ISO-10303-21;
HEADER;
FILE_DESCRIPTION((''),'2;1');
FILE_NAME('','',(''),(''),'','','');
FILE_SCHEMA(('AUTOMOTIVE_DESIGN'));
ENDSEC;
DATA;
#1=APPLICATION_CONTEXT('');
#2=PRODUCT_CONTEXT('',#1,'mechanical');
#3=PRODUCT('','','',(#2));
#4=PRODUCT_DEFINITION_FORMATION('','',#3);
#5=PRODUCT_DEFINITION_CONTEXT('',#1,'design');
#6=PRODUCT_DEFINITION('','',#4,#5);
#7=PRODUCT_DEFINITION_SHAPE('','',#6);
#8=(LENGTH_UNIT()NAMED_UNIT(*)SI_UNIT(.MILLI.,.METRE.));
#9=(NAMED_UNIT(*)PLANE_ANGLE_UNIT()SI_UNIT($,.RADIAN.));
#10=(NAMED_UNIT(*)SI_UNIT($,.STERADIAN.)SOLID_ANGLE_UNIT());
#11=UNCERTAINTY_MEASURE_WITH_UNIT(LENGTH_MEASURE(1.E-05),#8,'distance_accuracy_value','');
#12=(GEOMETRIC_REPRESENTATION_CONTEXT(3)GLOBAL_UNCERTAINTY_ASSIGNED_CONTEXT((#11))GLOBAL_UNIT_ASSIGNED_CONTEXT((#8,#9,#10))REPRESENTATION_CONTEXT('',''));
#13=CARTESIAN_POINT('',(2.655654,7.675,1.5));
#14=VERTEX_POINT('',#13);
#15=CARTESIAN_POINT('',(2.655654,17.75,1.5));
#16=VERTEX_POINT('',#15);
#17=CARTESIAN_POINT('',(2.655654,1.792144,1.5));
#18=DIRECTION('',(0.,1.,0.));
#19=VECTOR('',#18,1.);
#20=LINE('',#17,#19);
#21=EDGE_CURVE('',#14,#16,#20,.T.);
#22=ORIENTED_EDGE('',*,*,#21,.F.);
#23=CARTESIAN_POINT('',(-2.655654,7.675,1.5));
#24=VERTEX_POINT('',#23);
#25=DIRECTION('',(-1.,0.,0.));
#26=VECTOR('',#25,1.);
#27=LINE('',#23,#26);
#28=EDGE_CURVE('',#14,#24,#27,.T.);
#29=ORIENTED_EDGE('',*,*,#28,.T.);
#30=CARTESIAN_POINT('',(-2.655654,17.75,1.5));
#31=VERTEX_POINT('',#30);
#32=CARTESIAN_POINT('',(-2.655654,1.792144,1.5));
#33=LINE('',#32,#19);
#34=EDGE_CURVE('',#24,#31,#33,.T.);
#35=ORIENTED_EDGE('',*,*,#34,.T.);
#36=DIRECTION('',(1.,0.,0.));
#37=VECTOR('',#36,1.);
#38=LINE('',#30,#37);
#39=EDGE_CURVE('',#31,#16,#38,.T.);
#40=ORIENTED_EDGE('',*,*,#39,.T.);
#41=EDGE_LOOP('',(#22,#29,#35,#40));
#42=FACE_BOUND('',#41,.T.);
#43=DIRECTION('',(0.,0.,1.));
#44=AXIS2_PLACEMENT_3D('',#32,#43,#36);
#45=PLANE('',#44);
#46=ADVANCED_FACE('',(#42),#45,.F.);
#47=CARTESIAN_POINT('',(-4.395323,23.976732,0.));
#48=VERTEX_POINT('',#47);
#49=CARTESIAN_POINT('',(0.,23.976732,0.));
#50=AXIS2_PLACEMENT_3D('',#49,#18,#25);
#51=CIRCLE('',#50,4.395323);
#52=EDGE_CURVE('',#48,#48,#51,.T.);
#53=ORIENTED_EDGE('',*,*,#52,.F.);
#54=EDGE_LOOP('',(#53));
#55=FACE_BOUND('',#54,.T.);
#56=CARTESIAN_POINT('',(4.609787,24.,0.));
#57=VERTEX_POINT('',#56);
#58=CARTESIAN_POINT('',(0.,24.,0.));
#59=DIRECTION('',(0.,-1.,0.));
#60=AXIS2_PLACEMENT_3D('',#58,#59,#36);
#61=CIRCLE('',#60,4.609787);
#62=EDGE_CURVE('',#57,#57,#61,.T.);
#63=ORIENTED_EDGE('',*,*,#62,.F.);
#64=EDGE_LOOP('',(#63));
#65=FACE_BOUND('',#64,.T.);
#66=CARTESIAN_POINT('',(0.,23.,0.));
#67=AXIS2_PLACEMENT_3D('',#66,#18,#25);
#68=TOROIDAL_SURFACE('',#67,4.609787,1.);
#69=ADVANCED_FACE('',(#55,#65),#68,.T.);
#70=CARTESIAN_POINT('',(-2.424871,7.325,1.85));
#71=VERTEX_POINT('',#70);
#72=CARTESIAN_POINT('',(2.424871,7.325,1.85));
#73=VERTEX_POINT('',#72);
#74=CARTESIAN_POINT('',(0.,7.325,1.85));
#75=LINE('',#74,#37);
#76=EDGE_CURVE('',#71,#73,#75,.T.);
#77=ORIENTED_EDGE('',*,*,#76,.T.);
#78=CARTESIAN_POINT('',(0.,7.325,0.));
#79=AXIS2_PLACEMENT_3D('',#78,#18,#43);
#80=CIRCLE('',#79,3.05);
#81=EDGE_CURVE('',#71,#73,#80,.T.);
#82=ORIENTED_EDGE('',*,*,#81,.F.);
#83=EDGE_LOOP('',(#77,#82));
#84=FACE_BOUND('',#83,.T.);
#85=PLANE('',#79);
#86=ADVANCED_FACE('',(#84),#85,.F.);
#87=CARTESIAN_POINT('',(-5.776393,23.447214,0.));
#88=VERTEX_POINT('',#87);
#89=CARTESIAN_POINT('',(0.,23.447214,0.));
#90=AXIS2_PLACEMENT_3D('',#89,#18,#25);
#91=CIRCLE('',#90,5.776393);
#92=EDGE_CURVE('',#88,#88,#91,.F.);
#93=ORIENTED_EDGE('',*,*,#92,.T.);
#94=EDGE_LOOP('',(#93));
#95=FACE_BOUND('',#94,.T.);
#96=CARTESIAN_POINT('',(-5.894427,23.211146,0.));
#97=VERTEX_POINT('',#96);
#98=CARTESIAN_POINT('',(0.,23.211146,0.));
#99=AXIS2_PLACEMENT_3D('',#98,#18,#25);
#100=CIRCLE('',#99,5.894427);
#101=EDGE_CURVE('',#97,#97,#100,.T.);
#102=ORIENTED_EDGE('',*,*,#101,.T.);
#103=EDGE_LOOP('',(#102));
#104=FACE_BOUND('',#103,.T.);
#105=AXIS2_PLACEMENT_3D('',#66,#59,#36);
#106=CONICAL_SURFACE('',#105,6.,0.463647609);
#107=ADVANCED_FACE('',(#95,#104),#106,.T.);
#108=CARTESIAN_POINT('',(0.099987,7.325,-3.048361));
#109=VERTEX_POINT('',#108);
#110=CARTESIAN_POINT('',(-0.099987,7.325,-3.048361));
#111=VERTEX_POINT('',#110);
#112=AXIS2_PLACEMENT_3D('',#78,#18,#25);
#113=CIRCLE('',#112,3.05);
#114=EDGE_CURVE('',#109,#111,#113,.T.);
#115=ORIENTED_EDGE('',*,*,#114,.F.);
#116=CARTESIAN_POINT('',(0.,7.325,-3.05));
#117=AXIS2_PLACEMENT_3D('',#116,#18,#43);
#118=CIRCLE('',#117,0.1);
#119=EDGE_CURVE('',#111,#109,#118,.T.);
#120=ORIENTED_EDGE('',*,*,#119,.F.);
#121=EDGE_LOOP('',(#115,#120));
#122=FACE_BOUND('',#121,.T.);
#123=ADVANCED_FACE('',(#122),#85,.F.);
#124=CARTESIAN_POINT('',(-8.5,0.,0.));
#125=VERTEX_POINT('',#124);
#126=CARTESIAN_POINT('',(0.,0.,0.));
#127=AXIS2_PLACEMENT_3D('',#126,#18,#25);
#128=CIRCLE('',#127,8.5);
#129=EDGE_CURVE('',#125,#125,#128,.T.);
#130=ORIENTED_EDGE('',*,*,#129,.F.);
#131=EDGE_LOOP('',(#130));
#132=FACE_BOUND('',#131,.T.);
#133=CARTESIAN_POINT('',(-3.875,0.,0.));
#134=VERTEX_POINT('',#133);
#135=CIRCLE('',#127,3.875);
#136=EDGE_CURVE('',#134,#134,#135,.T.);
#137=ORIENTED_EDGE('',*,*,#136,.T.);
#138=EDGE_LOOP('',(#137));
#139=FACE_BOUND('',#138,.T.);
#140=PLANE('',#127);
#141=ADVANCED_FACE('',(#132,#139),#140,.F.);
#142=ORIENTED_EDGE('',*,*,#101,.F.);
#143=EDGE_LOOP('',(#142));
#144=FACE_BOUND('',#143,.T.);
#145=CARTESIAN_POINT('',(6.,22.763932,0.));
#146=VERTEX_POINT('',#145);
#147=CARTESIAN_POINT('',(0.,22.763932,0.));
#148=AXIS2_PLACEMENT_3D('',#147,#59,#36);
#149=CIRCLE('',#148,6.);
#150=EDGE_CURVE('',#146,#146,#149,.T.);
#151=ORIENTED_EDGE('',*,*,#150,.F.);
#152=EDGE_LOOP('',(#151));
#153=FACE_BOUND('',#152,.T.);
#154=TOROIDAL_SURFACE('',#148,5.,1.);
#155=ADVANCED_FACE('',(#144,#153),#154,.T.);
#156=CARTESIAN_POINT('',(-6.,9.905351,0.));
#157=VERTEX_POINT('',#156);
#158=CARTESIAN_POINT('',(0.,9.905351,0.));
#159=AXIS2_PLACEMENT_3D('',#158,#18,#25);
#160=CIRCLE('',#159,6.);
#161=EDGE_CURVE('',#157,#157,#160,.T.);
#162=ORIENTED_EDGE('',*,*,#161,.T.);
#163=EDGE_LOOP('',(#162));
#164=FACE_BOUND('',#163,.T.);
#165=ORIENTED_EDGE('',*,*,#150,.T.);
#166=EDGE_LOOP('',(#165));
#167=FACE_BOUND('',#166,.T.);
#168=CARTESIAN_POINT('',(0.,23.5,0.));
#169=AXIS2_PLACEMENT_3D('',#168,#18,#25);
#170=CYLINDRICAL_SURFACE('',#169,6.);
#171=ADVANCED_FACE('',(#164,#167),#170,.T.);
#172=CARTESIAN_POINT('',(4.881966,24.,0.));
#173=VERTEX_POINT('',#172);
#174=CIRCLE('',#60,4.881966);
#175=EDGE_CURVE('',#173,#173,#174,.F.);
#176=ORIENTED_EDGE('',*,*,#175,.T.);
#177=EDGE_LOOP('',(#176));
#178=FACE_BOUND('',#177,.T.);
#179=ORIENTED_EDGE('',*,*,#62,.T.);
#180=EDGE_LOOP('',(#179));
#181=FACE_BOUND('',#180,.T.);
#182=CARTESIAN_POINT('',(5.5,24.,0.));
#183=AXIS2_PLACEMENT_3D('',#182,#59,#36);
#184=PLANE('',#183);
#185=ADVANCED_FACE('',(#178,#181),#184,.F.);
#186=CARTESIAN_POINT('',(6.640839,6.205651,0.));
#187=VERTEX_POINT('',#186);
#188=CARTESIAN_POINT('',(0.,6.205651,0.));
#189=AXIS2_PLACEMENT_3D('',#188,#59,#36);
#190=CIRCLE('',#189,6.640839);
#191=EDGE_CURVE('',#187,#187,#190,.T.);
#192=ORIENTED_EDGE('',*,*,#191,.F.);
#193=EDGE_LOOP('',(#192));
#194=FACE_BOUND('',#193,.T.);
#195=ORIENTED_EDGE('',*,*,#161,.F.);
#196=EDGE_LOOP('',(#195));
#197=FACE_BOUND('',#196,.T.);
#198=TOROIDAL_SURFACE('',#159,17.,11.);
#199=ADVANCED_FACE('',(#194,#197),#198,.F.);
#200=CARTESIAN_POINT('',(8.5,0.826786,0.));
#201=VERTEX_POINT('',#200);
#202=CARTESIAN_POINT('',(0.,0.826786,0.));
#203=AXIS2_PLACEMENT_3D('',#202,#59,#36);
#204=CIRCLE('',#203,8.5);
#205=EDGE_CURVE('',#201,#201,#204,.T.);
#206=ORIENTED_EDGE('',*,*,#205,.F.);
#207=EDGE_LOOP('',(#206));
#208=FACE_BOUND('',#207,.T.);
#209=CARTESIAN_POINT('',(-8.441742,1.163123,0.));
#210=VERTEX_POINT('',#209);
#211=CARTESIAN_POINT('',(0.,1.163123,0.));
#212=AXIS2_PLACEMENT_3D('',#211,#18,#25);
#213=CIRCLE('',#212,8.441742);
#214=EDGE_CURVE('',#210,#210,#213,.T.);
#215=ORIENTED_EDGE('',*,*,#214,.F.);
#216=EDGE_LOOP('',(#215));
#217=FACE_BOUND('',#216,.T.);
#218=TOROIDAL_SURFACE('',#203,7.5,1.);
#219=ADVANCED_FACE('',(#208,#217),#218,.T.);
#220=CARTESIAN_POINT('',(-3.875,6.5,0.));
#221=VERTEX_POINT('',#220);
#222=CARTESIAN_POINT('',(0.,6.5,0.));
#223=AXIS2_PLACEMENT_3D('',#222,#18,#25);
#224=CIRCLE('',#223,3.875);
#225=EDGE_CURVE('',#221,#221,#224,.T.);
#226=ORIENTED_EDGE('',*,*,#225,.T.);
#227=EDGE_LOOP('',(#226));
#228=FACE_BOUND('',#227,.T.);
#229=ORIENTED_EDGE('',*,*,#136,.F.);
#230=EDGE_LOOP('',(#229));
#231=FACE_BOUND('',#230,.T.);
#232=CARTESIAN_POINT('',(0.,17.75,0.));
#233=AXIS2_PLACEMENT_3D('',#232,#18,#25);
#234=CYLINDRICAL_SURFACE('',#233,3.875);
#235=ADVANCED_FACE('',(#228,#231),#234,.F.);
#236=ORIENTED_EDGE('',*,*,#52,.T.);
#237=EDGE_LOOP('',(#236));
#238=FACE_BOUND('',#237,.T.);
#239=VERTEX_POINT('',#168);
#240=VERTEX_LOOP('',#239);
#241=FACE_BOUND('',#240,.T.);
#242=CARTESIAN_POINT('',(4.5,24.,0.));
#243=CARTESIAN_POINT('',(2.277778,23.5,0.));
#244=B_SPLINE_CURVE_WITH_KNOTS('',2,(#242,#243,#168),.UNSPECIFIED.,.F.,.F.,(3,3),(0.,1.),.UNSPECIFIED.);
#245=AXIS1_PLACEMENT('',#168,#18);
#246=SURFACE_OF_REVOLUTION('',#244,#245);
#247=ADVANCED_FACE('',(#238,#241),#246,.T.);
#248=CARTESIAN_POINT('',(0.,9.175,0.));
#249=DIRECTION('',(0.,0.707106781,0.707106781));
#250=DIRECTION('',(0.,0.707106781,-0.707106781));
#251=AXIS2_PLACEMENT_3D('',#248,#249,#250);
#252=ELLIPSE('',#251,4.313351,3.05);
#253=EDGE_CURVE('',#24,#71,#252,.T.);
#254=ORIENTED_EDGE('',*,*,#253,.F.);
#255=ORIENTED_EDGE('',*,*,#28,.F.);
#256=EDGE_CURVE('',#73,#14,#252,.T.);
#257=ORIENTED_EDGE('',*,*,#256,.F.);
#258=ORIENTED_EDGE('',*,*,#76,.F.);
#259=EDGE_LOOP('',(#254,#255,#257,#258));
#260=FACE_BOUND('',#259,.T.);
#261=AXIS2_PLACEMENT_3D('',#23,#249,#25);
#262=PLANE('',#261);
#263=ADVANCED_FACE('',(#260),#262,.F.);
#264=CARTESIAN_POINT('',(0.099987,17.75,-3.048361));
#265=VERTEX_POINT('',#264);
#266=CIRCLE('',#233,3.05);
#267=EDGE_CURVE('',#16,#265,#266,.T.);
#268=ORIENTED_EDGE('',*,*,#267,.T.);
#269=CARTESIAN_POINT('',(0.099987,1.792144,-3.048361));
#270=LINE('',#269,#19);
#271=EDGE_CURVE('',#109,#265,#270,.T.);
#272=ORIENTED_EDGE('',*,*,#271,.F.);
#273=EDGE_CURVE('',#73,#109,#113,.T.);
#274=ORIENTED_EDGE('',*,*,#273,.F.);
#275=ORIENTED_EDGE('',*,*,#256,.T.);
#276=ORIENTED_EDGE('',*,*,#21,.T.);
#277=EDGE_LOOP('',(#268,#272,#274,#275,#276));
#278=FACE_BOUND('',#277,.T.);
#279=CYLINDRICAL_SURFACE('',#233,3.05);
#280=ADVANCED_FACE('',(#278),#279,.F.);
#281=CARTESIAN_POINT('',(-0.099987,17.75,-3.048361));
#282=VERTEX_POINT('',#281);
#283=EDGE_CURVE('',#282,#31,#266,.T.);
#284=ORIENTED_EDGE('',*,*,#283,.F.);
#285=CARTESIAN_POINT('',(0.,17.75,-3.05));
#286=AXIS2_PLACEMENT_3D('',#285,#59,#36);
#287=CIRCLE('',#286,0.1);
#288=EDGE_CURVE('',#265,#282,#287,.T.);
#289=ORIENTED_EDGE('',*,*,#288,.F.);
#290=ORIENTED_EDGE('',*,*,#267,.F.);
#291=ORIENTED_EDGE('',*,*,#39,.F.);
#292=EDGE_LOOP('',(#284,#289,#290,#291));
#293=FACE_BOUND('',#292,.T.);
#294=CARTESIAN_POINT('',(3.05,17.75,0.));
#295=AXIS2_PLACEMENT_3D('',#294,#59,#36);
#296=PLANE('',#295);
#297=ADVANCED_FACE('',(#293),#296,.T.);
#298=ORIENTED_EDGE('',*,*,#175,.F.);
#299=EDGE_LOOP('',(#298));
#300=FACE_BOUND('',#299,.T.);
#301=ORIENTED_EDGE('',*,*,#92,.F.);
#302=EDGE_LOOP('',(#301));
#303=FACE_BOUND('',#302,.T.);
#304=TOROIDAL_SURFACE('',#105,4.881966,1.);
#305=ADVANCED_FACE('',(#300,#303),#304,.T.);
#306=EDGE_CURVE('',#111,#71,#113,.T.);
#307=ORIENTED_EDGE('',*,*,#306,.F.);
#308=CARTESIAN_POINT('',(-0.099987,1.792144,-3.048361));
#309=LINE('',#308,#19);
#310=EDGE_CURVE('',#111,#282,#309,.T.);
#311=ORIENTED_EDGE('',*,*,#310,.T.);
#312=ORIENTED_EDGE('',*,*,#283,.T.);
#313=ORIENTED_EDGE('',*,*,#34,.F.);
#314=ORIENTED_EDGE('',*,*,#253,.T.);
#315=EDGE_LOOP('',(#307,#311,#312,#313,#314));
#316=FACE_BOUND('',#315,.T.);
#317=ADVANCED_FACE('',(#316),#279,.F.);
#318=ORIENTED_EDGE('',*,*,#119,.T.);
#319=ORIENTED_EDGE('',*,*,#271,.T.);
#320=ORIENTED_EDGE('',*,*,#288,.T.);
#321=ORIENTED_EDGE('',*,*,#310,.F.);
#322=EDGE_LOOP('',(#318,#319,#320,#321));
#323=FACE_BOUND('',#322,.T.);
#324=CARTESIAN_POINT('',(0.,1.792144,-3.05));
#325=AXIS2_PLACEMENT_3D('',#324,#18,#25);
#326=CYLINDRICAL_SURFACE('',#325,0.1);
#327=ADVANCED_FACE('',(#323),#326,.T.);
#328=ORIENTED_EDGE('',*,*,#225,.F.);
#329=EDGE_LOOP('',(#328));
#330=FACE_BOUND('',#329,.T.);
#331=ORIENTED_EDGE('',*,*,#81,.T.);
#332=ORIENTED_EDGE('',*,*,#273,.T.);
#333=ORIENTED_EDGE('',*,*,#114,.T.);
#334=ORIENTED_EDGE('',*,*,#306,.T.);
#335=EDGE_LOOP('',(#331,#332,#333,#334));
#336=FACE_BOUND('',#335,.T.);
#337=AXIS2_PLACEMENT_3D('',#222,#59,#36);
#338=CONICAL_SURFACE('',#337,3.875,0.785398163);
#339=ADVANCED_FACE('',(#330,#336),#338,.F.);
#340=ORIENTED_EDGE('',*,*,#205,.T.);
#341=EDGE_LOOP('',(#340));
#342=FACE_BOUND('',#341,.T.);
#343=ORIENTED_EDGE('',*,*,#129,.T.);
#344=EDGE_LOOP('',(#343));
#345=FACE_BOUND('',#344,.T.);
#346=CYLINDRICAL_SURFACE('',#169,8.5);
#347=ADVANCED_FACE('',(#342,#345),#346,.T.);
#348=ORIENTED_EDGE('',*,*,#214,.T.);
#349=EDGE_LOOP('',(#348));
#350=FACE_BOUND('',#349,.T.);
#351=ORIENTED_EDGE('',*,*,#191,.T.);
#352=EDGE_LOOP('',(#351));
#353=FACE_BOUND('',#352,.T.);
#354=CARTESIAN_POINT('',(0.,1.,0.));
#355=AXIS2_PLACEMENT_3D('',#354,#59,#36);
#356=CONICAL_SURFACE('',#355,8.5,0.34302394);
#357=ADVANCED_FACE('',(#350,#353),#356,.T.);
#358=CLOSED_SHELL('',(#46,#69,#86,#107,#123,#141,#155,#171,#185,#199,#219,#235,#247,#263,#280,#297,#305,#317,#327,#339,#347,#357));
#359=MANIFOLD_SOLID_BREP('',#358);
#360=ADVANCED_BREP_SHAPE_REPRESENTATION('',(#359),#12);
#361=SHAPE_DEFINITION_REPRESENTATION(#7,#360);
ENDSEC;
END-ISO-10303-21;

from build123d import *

# Parameters (mm, degrees)
FILLET1_R           = 11
FILLET2_R           = 1
BOSS_EXTRUDE1_DEPTH = 10.425
CHAMFER1_SIZE       = 0.35


with BuildPart() as part:
    # Sketch1 → Revolve1 (revolve)
    with BuildSketch(Plane.XY, mode=Mode.PRIVATE) as revolve1_sk:
        with BuildLine():
            Line((0, 0), (8.5, 0))
            Line((8.5, 0), (8.5, 1))
            Line((8.5, 1), (6, 8))
            Line((6, 8), (6, 23))
            Line((6, 23), (5.5, 24))
            Line((5.5, 24), (4.5, 24))
            add(Edge.make_bspline(
                [(4.5, 24), (2.277777778, 23.5), (0, 23.5)],
                knots=[0, 0, 0, 1, 1, 1], degree=2))
            Line((0, 23.5), (0, 0))
        make_face()
    revolve(revolve1_sk.sketch.rotate(Axis((0, 23.5, 0), (0, -1, 0)), 180), axis=Axis((0, 23.5, 0), (0, -1, 0)))

    # Fillet1
    fillet1_edges = [part.edges().sort_by_distance(p)[0] for p in [
        (6, 8, 0),
    ]]
    fillet(fillet1_edges, radius=FILLET1_R)

    # Fillet2
    fillet2_edges = [part.edges().sort_by_distance(p)[0] for p in [
        (4.5, 24, 0),
        (5.5, 24, 0),
        (6, 23, 0),
        (8.5, 1, 0),
    ]]
    fillet(fillet2_edges, radius=FILLET2_R)

    # Sketch3 → Cut-Revolve1 (revolve, cut)
    with BuildSketch(Plane.XY, mode=Mode.PRIVATE) as cut_revolve1_sk:
        Polygon((0, 0), (3.875, 0), (3.875, 6.5), (3.05, 7.325), (3.05, 17.75), (0, 17.75), align=None)
    revolve(cut_revolve1_sk.sketch.rotate(Axis((0, 17.75, 0), (0, -1, 0)), 180), axis=Axis((0, 17.75, 0), (0, -1, 0)), mode=Mode.SUBTRACT)

    # Sketch4 → Boss-Extrude1 (add)
    with BuildSketch(Plane.XZ.offset(-17.75)):
        with BuildLine():
            Line((-2.655654345, 1.5), (2.655654345, 1.5))
            ThreePointArc((2.655654345, 1.5), (0, 3.05), (-2.655654345, 1.5))
        make_face()
        with BuildLine():
            ThreePointArc((-0.099986562, -3.048360656), (0, -3.05), (0.099986562, -3.048360656))
            ThreePointArc((0.099986562, -3.048360656), (0, -2.95), (-0.099986562, -3.048360656))
        make_face()
    extrude(amount=BOSS_EXTRUDE1_DEPTH)

    # Chamfer1
    # the kernel refuses this chamfer: 0.35 mm, written as the material it takes off along each edge
    with BuildSketch(Plane(origin=(-3.555743391, 7.325, 1.5), x_dir=(0, -0.02749587661058614, 0.9996219169112968), z_dir=(1, 0, 0))) as chamfer1_piece_1_section:
        Polygon((CHAMFER1_SIZE * 0.999621916911, -CHAMFER1_SIZE * 0.0274958766106), (-CHAMFER1_SIZE * 0.0274958766106, -CHAMFER1_SIZE * 0.999621916911), (0, 0), align=None)
    chamfer1_piece_1 = extrude(amount=7.111486782, mode=Mode.PRIVATE)
    chamfer1_piece_1 = chamfer1_piece_1 & Plane(origin=(0, 7.499624527, 0), x_dir=(-1, 0, 0), z_dir=(0, 1, 0)) * Cylinder(3.05, 16, mode=Mode.PRIVATE)
    add(chamfer1_piece_1, mode=Mode.SUBTRACT)


solid = part.part
